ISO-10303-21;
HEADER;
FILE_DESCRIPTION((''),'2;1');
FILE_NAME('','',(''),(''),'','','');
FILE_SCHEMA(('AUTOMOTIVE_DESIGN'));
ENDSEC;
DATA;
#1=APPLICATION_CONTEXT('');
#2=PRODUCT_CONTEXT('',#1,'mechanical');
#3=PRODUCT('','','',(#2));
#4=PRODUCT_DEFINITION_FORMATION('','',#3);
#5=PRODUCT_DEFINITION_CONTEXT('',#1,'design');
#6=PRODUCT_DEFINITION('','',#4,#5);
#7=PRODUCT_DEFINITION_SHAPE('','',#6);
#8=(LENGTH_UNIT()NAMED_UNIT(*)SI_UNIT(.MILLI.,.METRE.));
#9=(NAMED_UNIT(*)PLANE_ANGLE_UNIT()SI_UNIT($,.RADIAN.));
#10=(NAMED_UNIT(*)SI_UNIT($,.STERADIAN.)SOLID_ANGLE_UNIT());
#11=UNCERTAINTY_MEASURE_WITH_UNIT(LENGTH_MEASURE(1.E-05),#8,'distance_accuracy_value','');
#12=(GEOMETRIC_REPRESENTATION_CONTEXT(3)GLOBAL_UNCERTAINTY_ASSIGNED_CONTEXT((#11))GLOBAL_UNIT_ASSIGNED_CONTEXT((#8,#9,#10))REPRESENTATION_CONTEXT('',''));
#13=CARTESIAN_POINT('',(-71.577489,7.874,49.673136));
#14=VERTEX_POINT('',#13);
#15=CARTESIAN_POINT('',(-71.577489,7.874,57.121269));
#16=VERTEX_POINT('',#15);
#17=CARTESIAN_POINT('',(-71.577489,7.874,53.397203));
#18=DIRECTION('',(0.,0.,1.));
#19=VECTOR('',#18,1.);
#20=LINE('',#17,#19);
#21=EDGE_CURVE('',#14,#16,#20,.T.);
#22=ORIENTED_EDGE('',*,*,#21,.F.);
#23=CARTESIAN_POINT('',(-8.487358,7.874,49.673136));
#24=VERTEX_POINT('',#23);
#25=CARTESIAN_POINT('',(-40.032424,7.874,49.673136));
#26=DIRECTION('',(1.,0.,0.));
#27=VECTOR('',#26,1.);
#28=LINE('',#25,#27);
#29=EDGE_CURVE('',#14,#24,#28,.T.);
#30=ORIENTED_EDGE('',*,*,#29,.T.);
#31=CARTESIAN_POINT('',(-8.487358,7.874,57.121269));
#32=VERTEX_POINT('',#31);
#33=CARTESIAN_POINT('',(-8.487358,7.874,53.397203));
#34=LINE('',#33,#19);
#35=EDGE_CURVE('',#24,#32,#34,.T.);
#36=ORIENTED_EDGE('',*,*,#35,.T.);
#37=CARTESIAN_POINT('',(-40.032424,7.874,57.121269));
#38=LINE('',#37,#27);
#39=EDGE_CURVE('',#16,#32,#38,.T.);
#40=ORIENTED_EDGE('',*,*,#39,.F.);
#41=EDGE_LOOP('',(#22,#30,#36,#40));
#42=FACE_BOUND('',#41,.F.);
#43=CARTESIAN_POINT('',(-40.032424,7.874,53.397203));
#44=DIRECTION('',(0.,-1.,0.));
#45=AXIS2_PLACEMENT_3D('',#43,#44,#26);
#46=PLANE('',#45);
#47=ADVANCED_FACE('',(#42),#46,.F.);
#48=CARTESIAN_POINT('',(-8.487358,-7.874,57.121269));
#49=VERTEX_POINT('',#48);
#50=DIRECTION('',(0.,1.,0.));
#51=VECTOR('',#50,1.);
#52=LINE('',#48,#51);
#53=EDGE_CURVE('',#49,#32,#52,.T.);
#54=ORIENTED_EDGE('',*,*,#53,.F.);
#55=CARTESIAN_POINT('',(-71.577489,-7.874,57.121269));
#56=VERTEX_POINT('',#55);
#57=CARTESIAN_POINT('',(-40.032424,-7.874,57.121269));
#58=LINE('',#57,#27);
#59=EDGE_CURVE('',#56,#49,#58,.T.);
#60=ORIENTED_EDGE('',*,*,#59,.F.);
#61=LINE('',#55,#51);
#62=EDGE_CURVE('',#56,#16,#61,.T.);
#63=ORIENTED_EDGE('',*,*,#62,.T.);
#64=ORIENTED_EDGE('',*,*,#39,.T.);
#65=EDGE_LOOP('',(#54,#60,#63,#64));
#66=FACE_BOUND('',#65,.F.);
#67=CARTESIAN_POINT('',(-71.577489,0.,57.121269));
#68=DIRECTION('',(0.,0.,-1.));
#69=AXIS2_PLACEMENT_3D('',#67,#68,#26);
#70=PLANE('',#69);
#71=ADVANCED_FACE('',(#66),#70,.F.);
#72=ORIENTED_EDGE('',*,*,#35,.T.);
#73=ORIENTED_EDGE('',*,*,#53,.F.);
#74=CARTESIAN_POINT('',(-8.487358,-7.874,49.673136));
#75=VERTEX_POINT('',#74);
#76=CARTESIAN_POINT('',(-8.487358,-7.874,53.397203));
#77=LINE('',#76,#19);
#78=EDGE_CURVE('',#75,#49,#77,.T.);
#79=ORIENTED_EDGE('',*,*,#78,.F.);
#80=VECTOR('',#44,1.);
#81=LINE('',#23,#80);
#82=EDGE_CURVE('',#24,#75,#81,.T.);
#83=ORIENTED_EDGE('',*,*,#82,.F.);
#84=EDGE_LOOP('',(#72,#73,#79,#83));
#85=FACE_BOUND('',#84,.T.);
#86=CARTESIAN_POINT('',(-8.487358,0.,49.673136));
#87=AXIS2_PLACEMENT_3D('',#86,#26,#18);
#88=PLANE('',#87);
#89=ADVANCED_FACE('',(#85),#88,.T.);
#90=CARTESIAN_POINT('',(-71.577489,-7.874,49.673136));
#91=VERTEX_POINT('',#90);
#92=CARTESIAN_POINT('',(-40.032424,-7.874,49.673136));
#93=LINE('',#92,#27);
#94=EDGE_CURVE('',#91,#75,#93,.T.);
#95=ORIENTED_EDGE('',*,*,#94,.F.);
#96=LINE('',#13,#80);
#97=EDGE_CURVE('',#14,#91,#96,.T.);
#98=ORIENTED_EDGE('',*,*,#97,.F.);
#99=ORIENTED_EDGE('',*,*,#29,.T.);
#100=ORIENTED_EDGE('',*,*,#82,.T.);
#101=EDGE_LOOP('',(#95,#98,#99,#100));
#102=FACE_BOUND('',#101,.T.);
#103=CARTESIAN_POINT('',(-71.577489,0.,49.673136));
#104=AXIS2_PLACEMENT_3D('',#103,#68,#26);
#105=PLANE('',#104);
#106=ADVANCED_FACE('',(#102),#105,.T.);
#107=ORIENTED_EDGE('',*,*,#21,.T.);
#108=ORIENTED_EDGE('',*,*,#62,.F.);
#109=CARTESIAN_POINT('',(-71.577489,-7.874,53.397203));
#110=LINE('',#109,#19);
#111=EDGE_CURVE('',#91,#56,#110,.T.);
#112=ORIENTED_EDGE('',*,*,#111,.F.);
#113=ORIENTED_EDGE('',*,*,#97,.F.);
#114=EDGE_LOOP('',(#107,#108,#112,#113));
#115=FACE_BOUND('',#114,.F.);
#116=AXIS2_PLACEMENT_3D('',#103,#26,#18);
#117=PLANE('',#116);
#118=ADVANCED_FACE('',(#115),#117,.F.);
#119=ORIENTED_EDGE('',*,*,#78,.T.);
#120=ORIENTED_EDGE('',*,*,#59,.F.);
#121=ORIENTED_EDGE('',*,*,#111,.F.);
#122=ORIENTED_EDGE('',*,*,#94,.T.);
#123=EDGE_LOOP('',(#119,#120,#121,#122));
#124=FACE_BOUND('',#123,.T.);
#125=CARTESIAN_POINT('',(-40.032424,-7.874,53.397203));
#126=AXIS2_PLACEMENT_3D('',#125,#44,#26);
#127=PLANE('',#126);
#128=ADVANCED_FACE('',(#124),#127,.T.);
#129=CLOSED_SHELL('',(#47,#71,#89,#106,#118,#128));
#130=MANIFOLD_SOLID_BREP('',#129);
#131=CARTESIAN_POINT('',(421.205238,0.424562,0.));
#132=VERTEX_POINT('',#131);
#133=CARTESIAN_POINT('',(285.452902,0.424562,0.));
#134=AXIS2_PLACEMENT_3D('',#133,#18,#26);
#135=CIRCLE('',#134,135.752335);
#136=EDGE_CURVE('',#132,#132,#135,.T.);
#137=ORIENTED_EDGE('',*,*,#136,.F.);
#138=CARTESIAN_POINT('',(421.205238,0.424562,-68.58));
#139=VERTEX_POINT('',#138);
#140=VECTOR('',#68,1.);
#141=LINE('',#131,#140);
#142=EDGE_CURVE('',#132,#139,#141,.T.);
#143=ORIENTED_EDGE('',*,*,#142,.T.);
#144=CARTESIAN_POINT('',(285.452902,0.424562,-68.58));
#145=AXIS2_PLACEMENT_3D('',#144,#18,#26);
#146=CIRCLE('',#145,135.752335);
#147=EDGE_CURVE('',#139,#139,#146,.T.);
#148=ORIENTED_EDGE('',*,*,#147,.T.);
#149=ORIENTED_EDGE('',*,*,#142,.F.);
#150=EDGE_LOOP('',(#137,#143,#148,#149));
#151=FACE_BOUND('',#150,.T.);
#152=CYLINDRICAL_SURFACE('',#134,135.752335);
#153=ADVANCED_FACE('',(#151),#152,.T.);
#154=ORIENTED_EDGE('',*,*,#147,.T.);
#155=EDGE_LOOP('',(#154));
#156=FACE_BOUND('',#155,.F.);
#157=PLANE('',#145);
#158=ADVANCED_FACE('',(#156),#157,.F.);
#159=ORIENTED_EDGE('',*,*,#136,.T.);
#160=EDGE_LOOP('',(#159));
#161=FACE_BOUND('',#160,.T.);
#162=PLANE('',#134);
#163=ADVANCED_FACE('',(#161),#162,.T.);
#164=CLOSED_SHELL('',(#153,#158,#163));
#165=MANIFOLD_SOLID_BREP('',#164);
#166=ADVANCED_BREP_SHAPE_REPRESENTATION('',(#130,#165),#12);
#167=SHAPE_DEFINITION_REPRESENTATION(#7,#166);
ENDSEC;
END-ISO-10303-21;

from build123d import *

# Parameters (mm, degrees)
F3_W     = 63.0901316181
F3_H     = 7.4481330812
F4_DEPTH = 7.874
F8_DEPTH = 68.58


# Not quite as in the source:
# - the program builds the solid bodies; features that only make, move or delete a surface that nothing else refers to are left out


with BuildPart() as f4:
    # F3 (on Front) → F4 (new body, symmetric)
    with BuildSketch(Plane.XZ):
        with Locations((-40.032423567, 53.3972028643)):
            Rectangle(F3_W, F3_H)
    extrude(amount=F4_DEPTH, both=True)


with BuildPart() as f8:
    # F7 (on Top) → F8 (new body)
    with BuildSketch(Plane.XY):
        with BuildLine():
            ThreePointArc((149.7005671263, 0.4245620221), (285.452902317, -135.3277731687), (421.2052375078, 0.4245620221))
            ThreePointArc((421.2052375078, 0.4245620221), (285.452902317, 136.1768972129), (149.7005671263, 0.4245620221))
        make_face()
    extrude(amount=-F8_DEPTH)


solid = Compound([f4.part, f8.part])
